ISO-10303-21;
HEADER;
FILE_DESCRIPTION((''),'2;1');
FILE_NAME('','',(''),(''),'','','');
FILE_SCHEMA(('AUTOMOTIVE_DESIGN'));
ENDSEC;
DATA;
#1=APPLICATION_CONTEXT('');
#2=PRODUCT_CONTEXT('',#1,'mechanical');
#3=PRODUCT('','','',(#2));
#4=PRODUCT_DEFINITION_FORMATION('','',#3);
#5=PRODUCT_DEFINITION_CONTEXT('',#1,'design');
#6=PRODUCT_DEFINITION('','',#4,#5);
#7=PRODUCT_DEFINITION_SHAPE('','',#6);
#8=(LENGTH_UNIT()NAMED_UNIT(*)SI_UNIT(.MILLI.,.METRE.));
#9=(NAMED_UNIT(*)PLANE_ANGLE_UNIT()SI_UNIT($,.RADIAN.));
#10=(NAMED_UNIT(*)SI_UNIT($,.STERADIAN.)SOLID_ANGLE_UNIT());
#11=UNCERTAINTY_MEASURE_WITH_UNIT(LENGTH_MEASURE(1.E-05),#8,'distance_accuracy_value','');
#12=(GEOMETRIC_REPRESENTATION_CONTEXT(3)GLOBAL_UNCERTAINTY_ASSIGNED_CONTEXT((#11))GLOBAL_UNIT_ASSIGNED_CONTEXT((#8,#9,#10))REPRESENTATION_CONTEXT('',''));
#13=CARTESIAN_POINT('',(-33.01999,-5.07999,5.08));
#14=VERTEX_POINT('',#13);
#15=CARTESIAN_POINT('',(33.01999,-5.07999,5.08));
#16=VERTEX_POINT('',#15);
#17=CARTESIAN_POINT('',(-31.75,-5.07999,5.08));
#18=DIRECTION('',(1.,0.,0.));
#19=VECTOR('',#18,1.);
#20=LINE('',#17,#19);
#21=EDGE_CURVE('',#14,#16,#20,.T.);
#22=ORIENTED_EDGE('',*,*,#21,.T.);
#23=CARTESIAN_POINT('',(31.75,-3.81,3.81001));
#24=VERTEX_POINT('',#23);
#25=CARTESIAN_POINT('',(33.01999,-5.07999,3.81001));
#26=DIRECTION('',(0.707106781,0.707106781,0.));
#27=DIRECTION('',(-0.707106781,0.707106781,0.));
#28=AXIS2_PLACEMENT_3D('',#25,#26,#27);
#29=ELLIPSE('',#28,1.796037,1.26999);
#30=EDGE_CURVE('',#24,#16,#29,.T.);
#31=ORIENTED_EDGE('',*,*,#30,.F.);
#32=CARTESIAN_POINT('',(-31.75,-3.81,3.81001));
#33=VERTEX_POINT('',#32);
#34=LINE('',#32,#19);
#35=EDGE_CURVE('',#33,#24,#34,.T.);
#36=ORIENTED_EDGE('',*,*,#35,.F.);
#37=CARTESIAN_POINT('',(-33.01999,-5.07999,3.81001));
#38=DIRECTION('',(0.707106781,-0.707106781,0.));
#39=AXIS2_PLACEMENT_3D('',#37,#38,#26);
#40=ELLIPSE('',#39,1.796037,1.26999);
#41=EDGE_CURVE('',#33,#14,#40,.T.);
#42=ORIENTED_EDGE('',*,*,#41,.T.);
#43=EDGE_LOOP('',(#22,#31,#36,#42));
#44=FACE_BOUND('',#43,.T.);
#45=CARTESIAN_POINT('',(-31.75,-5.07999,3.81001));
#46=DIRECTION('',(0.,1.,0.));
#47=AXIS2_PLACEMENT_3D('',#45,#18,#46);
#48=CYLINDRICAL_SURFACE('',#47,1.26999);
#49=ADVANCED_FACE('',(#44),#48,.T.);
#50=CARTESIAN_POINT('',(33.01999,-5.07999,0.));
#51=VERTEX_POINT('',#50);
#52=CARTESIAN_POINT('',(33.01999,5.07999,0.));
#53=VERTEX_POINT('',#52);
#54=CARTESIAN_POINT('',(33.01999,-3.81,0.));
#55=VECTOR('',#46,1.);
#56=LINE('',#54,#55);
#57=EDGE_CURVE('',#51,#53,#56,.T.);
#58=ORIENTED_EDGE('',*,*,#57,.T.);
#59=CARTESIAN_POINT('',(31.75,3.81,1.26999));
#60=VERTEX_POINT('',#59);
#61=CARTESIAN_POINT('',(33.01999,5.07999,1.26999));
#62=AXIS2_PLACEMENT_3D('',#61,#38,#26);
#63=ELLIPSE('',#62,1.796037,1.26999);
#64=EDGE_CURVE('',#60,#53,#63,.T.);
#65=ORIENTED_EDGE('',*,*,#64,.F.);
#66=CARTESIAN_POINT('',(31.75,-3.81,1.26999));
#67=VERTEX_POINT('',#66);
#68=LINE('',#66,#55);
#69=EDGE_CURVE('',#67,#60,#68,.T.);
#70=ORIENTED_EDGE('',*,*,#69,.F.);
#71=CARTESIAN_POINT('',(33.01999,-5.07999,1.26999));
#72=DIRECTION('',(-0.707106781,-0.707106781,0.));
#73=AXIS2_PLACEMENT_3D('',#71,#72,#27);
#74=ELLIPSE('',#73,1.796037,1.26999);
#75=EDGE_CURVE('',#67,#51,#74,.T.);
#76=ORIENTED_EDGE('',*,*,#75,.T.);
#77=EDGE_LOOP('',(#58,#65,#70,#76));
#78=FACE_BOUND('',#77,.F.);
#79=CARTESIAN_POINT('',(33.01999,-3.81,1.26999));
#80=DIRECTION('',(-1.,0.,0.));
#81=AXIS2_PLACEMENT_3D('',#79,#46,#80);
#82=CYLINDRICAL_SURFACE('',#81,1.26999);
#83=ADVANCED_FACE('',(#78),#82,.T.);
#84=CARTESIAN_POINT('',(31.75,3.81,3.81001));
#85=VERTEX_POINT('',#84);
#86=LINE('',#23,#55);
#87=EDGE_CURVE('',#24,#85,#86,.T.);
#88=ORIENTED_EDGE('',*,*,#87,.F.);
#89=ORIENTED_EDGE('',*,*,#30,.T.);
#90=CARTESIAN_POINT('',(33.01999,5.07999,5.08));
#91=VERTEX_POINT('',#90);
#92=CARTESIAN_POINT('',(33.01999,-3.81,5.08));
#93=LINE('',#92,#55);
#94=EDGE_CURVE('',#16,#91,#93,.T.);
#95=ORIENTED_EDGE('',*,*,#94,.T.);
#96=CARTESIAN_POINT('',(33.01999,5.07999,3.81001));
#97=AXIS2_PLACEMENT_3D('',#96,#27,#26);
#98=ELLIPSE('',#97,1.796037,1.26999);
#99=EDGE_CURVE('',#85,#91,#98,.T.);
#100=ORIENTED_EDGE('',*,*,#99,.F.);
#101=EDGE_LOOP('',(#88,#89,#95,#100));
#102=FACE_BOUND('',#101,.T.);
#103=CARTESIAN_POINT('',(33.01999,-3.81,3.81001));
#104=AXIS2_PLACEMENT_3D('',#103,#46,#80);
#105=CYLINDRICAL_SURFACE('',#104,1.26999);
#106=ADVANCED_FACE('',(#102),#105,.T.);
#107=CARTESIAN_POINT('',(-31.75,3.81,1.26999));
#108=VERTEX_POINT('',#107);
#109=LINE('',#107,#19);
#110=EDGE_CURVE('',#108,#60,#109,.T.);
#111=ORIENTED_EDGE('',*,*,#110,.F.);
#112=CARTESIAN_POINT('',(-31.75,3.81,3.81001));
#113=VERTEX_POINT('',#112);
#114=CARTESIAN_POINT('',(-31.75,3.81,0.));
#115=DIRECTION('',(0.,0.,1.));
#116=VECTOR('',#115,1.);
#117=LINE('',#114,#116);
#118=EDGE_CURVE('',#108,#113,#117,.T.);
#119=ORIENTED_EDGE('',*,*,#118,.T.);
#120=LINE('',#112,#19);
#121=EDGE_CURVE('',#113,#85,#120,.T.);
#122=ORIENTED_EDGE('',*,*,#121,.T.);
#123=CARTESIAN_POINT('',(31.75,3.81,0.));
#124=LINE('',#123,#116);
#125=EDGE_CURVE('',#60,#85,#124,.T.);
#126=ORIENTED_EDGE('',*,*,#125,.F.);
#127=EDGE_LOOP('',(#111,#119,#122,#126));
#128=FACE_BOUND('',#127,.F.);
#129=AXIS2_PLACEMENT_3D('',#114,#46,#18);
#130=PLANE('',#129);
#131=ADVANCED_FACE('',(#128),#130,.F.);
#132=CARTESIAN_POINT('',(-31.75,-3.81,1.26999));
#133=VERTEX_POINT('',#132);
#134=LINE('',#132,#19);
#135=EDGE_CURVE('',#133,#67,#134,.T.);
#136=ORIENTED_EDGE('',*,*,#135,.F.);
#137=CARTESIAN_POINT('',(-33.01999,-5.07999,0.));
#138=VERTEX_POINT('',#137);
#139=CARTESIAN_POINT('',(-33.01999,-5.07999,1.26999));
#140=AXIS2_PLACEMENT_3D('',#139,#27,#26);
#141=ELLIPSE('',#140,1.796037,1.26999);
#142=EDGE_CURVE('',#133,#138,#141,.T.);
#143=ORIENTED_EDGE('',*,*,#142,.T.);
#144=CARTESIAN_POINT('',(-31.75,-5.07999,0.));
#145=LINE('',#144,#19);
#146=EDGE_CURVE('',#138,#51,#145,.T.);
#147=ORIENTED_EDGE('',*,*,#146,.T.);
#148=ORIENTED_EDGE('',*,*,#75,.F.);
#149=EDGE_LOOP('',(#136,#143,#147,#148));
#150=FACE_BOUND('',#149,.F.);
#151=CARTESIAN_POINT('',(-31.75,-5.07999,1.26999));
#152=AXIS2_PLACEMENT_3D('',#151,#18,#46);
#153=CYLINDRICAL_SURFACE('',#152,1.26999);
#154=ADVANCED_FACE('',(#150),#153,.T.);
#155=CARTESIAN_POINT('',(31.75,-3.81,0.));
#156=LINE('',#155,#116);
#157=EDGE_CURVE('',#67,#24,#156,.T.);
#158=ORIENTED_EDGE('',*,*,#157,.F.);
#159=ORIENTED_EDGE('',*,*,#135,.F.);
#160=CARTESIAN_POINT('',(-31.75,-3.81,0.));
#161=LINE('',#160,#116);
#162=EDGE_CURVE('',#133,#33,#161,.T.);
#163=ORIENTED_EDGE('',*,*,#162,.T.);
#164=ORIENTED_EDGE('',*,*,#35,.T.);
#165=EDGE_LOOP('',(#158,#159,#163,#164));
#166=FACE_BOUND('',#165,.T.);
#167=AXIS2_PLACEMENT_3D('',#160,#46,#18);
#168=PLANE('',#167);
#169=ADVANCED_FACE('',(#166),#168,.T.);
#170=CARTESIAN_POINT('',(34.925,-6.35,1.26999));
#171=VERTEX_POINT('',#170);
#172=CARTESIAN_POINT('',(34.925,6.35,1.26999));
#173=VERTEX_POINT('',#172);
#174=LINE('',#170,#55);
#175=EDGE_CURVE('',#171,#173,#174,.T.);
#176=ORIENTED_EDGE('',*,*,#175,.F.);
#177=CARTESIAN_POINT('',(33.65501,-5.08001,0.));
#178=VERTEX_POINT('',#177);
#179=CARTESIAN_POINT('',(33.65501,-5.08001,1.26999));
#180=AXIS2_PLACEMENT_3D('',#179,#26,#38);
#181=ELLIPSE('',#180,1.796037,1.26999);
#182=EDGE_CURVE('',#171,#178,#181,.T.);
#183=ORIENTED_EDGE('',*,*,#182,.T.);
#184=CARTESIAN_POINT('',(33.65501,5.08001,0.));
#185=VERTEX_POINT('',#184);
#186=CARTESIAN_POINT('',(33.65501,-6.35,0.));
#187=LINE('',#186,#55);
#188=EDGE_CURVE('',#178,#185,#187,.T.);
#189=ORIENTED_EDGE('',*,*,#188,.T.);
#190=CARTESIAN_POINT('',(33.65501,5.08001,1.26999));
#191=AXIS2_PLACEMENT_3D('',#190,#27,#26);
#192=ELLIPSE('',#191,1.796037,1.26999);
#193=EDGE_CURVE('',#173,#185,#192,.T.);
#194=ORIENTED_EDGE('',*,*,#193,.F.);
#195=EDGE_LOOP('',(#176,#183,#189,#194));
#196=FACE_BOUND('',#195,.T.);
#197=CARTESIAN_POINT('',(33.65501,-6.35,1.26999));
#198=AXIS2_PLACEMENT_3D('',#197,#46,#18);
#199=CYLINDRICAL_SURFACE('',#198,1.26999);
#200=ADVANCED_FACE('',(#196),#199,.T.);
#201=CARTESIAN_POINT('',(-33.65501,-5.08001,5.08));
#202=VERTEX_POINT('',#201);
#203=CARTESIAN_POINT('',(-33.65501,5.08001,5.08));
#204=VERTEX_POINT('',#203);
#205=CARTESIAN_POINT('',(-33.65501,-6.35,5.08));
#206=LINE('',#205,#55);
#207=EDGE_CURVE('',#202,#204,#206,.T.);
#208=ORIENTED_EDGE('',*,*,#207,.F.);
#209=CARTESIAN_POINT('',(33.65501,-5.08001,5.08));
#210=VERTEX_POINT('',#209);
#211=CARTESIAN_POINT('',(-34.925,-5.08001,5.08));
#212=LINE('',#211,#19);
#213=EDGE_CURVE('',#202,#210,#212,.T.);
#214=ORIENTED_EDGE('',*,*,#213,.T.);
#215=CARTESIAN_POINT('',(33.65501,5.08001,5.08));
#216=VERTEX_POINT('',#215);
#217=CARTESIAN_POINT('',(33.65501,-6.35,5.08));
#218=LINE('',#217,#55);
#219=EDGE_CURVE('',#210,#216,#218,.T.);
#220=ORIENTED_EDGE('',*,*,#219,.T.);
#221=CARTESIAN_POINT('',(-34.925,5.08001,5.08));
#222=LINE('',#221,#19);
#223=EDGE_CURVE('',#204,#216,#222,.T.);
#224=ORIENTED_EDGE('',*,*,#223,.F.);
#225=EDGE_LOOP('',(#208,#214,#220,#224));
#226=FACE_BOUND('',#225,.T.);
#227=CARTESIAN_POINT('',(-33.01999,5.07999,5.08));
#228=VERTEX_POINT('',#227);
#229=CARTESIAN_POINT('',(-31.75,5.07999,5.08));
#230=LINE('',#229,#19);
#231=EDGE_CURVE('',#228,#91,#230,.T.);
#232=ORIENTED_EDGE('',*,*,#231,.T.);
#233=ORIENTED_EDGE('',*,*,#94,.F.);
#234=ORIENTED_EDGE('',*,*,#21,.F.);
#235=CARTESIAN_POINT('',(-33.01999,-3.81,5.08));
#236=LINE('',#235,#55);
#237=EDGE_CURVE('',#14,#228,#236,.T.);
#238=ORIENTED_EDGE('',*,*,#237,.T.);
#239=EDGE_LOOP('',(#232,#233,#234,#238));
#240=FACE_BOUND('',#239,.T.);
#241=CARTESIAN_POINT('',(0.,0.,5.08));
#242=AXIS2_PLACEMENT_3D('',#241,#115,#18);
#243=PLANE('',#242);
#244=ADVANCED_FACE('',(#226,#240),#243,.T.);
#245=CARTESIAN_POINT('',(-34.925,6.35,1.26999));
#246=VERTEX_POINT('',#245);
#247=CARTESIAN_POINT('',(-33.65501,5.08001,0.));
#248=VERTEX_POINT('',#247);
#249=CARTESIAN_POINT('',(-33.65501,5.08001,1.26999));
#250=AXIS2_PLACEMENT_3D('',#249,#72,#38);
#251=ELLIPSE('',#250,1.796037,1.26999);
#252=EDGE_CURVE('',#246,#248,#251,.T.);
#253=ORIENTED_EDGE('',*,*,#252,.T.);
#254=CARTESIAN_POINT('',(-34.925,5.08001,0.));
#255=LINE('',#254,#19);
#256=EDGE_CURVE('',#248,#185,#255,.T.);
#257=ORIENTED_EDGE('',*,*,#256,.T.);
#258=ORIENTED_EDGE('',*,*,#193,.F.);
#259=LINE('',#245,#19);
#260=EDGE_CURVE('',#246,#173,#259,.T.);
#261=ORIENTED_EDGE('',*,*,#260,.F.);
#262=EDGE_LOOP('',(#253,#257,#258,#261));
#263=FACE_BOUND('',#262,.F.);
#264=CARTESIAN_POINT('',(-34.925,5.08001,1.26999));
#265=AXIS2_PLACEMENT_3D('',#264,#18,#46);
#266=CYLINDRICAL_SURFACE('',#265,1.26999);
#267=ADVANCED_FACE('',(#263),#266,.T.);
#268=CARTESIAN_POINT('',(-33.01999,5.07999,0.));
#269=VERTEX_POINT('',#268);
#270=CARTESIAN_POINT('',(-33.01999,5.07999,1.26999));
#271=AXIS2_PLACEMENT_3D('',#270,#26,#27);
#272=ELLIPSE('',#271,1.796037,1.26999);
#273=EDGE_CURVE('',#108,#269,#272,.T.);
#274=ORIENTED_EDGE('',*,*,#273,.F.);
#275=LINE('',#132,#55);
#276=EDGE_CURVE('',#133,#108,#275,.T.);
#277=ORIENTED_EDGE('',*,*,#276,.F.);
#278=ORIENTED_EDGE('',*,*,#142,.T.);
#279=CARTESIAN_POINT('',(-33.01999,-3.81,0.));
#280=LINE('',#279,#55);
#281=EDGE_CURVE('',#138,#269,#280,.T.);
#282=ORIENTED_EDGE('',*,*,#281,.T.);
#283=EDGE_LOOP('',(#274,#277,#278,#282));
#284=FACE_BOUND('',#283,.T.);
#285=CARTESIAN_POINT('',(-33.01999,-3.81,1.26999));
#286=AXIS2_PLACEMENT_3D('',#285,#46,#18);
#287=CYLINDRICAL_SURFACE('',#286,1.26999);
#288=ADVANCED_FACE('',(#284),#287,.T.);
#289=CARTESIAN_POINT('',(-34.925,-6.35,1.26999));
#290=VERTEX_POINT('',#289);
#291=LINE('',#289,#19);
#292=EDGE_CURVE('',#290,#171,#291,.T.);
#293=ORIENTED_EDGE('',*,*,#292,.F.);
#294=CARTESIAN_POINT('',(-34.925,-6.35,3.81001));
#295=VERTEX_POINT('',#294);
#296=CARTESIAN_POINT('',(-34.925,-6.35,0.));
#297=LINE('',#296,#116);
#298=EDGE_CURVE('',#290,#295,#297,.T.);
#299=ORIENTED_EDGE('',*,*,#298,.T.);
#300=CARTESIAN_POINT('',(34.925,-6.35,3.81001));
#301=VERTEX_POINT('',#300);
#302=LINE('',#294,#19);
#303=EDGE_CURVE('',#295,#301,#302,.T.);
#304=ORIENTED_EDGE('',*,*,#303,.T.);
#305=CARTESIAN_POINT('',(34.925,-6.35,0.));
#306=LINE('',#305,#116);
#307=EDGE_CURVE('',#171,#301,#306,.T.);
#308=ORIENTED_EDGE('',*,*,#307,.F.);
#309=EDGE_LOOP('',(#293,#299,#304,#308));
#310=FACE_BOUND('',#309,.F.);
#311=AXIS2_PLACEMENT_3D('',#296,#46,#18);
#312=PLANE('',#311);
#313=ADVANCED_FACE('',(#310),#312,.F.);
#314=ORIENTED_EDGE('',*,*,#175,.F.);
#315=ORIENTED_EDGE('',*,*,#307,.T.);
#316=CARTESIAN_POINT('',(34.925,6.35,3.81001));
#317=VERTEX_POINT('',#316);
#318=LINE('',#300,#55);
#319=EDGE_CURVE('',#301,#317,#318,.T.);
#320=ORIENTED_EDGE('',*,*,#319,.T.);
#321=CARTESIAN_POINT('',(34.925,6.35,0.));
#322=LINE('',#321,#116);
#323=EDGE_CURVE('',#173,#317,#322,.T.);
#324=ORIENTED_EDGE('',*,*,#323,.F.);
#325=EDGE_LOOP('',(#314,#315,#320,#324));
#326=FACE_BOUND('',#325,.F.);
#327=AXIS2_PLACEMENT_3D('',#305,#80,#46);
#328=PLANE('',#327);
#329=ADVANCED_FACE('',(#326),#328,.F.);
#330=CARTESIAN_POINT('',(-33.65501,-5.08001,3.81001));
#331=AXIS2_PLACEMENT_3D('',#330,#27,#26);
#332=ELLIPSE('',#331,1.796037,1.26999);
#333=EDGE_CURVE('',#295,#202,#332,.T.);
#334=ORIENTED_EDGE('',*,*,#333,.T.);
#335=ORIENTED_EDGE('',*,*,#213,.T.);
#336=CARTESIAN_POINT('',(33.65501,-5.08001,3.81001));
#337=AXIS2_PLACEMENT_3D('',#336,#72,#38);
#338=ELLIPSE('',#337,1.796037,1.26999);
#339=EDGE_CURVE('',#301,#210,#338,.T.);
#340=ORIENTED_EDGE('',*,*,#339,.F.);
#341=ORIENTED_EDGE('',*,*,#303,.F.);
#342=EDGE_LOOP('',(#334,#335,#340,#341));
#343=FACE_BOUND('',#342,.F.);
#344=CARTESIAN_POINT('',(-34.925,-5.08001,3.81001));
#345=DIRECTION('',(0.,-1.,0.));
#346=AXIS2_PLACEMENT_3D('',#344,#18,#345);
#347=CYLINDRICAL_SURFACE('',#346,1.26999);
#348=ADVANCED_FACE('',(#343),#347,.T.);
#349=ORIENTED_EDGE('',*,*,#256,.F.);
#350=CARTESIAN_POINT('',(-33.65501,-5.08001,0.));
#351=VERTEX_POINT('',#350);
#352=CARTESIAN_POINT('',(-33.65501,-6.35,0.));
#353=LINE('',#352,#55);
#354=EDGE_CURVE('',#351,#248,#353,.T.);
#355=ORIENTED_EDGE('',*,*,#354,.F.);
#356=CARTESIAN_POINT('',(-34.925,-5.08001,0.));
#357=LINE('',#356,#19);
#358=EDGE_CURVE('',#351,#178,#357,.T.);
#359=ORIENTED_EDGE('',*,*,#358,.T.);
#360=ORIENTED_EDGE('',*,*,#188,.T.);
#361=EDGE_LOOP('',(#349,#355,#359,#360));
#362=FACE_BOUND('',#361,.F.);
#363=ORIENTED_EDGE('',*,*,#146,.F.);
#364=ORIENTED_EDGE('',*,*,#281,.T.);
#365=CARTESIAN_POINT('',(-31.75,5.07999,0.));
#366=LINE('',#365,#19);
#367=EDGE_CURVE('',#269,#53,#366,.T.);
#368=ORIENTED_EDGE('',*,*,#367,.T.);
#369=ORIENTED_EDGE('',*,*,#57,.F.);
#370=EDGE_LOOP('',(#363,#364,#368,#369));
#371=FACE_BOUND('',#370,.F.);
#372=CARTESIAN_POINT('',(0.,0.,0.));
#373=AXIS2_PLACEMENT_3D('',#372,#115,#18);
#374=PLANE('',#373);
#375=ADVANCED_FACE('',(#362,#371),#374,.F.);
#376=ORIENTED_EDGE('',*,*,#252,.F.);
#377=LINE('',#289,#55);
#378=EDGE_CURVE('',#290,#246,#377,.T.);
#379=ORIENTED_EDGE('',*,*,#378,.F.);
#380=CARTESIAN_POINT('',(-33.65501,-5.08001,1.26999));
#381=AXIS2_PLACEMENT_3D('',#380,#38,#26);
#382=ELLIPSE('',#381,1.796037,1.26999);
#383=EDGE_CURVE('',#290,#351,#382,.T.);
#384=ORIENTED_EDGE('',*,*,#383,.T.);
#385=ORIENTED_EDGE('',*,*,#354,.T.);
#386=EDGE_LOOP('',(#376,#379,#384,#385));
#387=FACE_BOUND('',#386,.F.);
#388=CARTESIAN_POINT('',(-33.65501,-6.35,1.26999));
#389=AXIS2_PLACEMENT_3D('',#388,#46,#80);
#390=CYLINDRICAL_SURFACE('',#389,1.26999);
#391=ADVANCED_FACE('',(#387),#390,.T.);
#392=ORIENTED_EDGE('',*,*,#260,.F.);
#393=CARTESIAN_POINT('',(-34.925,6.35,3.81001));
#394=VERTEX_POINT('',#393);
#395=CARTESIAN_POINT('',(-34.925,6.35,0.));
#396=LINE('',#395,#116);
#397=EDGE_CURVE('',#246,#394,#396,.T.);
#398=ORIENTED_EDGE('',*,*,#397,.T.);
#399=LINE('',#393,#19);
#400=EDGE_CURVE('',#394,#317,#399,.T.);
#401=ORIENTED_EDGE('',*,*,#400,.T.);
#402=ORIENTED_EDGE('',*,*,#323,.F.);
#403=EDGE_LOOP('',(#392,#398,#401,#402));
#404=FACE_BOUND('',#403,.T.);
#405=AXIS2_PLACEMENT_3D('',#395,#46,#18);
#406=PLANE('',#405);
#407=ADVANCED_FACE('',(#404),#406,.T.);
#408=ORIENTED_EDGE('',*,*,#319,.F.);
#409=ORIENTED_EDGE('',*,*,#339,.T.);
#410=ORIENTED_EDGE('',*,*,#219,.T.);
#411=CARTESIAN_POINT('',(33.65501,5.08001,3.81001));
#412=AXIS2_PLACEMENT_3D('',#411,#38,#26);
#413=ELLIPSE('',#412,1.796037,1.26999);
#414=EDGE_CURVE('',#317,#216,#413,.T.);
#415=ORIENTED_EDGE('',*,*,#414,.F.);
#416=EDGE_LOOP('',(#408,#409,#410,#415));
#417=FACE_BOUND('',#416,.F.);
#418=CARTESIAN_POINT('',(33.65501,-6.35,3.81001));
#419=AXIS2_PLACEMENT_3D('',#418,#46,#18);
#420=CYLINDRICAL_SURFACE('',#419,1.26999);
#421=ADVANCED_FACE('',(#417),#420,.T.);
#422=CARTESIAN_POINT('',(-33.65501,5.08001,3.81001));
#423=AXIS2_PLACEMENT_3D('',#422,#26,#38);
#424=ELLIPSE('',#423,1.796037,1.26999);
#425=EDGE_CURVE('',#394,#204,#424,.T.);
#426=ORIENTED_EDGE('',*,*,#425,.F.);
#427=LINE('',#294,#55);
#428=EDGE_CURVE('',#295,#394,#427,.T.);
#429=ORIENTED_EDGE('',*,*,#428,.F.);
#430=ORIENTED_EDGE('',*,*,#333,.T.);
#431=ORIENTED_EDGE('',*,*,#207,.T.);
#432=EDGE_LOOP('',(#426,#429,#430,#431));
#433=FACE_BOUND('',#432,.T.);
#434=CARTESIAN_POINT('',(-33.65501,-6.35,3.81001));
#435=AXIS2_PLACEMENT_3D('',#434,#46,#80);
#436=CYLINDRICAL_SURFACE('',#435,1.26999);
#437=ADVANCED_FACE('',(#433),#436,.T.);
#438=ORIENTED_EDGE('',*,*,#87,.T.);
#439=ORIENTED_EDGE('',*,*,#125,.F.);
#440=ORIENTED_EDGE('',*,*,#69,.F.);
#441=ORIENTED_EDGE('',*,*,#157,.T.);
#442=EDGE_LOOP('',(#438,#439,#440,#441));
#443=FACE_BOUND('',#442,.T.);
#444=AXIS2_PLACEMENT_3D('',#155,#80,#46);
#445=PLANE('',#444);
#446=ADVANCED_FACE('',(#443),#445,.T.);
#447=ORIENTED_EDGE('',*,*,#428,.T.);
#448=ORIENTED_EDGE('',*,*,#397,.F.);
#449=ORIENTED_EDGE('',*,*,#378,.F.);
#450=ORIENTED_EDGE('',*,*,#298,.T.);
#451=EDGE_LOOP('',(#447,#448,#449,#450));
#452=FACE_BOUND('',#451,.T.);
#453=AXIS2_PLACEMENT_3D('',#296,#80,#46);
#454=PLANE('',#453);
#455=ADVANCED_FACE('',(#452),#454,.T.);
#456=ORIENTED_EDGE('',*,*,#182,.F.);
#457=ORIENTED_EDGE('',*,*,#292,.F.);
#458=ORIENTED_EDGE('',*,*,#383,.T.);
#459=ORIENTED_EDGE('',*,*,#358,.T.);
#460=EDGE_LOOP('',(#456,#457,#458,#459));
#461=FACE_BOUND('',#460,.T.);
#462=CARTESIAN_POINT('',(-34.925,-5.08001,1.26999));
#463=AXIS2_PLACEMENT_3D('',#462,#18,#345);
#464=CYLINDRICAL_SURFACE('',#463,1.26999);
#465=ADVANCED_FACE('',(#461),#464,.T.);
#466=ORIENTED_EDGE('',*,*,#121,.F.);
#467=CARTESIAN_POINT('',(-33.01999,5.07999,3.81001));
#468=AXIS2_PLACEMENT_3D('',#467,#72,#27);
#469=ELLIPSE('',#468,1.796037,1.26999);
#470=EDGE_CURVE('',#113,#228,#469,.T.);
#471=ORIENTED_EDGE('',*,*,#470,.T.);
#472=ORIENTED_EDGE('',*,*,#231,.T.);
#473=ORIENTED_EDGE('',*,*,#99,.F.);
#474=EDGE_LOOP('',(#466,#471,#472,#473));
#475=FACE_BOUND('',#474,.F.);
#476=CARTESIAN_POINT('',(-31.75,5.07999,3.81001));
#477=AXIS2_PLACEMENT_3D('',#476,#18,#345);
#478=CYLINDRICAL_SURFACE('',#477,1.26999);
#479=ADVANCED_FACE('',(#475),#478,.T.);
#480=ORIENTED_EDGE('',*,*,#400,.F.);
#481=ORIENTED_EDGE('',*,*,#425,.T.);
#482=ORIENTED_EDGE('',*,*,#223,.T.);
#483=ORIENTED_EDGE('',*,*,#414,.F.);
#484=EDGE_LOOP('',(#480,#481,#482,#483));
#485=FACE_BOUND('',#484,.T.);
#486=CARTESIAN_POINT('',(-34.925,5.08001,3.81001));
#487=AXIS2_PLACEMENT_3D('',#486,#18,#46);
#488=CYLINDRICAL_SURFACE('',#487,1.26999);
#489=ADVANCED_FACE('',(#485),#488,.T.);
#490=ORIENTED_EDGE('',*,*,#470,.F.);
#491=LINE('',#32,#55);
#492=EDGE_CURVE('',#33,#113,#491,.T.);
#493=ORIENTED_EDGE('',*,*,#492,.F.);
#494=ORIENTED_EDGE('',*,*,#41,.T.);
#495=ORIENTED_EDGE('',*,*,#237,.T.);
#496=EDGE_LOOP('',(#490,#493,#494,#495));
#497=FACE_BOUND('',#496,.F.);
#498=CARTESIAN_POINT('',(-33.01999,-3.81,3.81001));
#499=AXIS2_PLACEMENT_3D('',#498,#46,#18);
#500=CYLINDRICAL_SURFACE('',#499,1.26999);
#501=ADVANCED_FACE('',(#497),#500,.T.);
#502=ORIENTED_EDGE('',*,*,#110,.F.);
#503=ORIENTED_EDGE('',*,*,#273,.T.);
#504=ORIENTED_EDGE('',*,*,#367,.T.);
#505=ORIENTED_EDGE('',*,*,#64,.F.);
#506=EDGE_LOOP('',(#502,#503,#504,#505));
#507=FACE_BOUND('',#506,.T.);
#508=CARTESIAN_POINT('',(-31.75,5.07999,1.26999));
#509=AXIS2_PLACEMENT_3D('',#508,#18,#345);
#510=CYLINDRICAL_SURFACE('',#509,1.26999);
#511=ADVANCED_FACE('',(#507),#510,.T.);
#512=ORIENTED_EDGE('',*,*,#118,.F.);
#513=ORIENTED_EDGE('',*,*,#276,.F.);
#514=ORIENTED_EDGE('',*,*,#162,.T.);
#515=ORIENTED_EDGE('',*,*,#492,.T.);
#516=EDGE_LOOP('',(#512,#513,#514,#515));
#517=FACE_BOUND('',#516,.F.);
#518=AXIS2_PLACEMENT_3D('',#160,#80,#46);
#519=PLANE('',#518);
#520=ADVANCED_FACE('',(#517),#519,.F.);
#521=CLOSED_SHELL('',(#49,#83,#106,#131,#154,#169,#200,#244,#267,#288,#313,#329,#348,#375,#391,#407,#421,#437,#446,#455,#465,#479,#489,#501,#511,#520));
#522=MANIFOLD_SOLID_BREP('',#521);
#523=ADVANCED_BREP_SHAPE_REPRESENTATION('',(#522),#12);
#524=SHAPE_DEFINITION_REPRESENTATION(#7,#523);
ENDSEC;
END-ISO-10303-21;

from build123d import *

# Parameters (mm, degrees)
F0_W     = 69.85
F0_H     = 12.7
F0_W_2   = 63.5
F0_H_2   = 7.62
F1_DEPTH = 5.08
F2_R     = 1.26999


# Not quite as in the source:
# - a fillet or chamfer is up to 0.001 mm smaller than in the source, because OpenCascade refuses the exact size


with BuildPart() as f1:
    # F0 (on Top) → F1 (new body)
    with BuildSketch(Plane.XY):
        Rectangle(F0_W, F0_H)
        Rectangle(F0_W_2, F0_H_2, mode=Mode.SUBTRACT)
    extrude(amount=F1_DEPTH)

    # F2 (radius 1.27 in the source; OpenCascade refuses exactly that, so slightly less here)
    f2_edges = [f1.edges().sort_by_distance(p)[0] for p in [
        (0, 6.35, 5.08),
        (-34.925, 0, 5.08),
        (0, -6.35, 5.08),
        (34.925, 0, 5.08),
        (-31.75, 0, 5.08),
        (0, 3.81, 5.08),
        (31.75, 0, 5.08),
        (0, -3.81, 5.08),
        (0, 6.35, 0),
        (-34.925, 0, 0),
        (0, -6.35, 0),
        (34.925, 0, 0),
        (-31.75, 0, 0),
        (0, 3.81, 0),
        (31.75, 0, 0),
        (0, -3.81, 0),
    ]]
    fillet(f2_edges, radius=F2_R)


solid = f1.part
